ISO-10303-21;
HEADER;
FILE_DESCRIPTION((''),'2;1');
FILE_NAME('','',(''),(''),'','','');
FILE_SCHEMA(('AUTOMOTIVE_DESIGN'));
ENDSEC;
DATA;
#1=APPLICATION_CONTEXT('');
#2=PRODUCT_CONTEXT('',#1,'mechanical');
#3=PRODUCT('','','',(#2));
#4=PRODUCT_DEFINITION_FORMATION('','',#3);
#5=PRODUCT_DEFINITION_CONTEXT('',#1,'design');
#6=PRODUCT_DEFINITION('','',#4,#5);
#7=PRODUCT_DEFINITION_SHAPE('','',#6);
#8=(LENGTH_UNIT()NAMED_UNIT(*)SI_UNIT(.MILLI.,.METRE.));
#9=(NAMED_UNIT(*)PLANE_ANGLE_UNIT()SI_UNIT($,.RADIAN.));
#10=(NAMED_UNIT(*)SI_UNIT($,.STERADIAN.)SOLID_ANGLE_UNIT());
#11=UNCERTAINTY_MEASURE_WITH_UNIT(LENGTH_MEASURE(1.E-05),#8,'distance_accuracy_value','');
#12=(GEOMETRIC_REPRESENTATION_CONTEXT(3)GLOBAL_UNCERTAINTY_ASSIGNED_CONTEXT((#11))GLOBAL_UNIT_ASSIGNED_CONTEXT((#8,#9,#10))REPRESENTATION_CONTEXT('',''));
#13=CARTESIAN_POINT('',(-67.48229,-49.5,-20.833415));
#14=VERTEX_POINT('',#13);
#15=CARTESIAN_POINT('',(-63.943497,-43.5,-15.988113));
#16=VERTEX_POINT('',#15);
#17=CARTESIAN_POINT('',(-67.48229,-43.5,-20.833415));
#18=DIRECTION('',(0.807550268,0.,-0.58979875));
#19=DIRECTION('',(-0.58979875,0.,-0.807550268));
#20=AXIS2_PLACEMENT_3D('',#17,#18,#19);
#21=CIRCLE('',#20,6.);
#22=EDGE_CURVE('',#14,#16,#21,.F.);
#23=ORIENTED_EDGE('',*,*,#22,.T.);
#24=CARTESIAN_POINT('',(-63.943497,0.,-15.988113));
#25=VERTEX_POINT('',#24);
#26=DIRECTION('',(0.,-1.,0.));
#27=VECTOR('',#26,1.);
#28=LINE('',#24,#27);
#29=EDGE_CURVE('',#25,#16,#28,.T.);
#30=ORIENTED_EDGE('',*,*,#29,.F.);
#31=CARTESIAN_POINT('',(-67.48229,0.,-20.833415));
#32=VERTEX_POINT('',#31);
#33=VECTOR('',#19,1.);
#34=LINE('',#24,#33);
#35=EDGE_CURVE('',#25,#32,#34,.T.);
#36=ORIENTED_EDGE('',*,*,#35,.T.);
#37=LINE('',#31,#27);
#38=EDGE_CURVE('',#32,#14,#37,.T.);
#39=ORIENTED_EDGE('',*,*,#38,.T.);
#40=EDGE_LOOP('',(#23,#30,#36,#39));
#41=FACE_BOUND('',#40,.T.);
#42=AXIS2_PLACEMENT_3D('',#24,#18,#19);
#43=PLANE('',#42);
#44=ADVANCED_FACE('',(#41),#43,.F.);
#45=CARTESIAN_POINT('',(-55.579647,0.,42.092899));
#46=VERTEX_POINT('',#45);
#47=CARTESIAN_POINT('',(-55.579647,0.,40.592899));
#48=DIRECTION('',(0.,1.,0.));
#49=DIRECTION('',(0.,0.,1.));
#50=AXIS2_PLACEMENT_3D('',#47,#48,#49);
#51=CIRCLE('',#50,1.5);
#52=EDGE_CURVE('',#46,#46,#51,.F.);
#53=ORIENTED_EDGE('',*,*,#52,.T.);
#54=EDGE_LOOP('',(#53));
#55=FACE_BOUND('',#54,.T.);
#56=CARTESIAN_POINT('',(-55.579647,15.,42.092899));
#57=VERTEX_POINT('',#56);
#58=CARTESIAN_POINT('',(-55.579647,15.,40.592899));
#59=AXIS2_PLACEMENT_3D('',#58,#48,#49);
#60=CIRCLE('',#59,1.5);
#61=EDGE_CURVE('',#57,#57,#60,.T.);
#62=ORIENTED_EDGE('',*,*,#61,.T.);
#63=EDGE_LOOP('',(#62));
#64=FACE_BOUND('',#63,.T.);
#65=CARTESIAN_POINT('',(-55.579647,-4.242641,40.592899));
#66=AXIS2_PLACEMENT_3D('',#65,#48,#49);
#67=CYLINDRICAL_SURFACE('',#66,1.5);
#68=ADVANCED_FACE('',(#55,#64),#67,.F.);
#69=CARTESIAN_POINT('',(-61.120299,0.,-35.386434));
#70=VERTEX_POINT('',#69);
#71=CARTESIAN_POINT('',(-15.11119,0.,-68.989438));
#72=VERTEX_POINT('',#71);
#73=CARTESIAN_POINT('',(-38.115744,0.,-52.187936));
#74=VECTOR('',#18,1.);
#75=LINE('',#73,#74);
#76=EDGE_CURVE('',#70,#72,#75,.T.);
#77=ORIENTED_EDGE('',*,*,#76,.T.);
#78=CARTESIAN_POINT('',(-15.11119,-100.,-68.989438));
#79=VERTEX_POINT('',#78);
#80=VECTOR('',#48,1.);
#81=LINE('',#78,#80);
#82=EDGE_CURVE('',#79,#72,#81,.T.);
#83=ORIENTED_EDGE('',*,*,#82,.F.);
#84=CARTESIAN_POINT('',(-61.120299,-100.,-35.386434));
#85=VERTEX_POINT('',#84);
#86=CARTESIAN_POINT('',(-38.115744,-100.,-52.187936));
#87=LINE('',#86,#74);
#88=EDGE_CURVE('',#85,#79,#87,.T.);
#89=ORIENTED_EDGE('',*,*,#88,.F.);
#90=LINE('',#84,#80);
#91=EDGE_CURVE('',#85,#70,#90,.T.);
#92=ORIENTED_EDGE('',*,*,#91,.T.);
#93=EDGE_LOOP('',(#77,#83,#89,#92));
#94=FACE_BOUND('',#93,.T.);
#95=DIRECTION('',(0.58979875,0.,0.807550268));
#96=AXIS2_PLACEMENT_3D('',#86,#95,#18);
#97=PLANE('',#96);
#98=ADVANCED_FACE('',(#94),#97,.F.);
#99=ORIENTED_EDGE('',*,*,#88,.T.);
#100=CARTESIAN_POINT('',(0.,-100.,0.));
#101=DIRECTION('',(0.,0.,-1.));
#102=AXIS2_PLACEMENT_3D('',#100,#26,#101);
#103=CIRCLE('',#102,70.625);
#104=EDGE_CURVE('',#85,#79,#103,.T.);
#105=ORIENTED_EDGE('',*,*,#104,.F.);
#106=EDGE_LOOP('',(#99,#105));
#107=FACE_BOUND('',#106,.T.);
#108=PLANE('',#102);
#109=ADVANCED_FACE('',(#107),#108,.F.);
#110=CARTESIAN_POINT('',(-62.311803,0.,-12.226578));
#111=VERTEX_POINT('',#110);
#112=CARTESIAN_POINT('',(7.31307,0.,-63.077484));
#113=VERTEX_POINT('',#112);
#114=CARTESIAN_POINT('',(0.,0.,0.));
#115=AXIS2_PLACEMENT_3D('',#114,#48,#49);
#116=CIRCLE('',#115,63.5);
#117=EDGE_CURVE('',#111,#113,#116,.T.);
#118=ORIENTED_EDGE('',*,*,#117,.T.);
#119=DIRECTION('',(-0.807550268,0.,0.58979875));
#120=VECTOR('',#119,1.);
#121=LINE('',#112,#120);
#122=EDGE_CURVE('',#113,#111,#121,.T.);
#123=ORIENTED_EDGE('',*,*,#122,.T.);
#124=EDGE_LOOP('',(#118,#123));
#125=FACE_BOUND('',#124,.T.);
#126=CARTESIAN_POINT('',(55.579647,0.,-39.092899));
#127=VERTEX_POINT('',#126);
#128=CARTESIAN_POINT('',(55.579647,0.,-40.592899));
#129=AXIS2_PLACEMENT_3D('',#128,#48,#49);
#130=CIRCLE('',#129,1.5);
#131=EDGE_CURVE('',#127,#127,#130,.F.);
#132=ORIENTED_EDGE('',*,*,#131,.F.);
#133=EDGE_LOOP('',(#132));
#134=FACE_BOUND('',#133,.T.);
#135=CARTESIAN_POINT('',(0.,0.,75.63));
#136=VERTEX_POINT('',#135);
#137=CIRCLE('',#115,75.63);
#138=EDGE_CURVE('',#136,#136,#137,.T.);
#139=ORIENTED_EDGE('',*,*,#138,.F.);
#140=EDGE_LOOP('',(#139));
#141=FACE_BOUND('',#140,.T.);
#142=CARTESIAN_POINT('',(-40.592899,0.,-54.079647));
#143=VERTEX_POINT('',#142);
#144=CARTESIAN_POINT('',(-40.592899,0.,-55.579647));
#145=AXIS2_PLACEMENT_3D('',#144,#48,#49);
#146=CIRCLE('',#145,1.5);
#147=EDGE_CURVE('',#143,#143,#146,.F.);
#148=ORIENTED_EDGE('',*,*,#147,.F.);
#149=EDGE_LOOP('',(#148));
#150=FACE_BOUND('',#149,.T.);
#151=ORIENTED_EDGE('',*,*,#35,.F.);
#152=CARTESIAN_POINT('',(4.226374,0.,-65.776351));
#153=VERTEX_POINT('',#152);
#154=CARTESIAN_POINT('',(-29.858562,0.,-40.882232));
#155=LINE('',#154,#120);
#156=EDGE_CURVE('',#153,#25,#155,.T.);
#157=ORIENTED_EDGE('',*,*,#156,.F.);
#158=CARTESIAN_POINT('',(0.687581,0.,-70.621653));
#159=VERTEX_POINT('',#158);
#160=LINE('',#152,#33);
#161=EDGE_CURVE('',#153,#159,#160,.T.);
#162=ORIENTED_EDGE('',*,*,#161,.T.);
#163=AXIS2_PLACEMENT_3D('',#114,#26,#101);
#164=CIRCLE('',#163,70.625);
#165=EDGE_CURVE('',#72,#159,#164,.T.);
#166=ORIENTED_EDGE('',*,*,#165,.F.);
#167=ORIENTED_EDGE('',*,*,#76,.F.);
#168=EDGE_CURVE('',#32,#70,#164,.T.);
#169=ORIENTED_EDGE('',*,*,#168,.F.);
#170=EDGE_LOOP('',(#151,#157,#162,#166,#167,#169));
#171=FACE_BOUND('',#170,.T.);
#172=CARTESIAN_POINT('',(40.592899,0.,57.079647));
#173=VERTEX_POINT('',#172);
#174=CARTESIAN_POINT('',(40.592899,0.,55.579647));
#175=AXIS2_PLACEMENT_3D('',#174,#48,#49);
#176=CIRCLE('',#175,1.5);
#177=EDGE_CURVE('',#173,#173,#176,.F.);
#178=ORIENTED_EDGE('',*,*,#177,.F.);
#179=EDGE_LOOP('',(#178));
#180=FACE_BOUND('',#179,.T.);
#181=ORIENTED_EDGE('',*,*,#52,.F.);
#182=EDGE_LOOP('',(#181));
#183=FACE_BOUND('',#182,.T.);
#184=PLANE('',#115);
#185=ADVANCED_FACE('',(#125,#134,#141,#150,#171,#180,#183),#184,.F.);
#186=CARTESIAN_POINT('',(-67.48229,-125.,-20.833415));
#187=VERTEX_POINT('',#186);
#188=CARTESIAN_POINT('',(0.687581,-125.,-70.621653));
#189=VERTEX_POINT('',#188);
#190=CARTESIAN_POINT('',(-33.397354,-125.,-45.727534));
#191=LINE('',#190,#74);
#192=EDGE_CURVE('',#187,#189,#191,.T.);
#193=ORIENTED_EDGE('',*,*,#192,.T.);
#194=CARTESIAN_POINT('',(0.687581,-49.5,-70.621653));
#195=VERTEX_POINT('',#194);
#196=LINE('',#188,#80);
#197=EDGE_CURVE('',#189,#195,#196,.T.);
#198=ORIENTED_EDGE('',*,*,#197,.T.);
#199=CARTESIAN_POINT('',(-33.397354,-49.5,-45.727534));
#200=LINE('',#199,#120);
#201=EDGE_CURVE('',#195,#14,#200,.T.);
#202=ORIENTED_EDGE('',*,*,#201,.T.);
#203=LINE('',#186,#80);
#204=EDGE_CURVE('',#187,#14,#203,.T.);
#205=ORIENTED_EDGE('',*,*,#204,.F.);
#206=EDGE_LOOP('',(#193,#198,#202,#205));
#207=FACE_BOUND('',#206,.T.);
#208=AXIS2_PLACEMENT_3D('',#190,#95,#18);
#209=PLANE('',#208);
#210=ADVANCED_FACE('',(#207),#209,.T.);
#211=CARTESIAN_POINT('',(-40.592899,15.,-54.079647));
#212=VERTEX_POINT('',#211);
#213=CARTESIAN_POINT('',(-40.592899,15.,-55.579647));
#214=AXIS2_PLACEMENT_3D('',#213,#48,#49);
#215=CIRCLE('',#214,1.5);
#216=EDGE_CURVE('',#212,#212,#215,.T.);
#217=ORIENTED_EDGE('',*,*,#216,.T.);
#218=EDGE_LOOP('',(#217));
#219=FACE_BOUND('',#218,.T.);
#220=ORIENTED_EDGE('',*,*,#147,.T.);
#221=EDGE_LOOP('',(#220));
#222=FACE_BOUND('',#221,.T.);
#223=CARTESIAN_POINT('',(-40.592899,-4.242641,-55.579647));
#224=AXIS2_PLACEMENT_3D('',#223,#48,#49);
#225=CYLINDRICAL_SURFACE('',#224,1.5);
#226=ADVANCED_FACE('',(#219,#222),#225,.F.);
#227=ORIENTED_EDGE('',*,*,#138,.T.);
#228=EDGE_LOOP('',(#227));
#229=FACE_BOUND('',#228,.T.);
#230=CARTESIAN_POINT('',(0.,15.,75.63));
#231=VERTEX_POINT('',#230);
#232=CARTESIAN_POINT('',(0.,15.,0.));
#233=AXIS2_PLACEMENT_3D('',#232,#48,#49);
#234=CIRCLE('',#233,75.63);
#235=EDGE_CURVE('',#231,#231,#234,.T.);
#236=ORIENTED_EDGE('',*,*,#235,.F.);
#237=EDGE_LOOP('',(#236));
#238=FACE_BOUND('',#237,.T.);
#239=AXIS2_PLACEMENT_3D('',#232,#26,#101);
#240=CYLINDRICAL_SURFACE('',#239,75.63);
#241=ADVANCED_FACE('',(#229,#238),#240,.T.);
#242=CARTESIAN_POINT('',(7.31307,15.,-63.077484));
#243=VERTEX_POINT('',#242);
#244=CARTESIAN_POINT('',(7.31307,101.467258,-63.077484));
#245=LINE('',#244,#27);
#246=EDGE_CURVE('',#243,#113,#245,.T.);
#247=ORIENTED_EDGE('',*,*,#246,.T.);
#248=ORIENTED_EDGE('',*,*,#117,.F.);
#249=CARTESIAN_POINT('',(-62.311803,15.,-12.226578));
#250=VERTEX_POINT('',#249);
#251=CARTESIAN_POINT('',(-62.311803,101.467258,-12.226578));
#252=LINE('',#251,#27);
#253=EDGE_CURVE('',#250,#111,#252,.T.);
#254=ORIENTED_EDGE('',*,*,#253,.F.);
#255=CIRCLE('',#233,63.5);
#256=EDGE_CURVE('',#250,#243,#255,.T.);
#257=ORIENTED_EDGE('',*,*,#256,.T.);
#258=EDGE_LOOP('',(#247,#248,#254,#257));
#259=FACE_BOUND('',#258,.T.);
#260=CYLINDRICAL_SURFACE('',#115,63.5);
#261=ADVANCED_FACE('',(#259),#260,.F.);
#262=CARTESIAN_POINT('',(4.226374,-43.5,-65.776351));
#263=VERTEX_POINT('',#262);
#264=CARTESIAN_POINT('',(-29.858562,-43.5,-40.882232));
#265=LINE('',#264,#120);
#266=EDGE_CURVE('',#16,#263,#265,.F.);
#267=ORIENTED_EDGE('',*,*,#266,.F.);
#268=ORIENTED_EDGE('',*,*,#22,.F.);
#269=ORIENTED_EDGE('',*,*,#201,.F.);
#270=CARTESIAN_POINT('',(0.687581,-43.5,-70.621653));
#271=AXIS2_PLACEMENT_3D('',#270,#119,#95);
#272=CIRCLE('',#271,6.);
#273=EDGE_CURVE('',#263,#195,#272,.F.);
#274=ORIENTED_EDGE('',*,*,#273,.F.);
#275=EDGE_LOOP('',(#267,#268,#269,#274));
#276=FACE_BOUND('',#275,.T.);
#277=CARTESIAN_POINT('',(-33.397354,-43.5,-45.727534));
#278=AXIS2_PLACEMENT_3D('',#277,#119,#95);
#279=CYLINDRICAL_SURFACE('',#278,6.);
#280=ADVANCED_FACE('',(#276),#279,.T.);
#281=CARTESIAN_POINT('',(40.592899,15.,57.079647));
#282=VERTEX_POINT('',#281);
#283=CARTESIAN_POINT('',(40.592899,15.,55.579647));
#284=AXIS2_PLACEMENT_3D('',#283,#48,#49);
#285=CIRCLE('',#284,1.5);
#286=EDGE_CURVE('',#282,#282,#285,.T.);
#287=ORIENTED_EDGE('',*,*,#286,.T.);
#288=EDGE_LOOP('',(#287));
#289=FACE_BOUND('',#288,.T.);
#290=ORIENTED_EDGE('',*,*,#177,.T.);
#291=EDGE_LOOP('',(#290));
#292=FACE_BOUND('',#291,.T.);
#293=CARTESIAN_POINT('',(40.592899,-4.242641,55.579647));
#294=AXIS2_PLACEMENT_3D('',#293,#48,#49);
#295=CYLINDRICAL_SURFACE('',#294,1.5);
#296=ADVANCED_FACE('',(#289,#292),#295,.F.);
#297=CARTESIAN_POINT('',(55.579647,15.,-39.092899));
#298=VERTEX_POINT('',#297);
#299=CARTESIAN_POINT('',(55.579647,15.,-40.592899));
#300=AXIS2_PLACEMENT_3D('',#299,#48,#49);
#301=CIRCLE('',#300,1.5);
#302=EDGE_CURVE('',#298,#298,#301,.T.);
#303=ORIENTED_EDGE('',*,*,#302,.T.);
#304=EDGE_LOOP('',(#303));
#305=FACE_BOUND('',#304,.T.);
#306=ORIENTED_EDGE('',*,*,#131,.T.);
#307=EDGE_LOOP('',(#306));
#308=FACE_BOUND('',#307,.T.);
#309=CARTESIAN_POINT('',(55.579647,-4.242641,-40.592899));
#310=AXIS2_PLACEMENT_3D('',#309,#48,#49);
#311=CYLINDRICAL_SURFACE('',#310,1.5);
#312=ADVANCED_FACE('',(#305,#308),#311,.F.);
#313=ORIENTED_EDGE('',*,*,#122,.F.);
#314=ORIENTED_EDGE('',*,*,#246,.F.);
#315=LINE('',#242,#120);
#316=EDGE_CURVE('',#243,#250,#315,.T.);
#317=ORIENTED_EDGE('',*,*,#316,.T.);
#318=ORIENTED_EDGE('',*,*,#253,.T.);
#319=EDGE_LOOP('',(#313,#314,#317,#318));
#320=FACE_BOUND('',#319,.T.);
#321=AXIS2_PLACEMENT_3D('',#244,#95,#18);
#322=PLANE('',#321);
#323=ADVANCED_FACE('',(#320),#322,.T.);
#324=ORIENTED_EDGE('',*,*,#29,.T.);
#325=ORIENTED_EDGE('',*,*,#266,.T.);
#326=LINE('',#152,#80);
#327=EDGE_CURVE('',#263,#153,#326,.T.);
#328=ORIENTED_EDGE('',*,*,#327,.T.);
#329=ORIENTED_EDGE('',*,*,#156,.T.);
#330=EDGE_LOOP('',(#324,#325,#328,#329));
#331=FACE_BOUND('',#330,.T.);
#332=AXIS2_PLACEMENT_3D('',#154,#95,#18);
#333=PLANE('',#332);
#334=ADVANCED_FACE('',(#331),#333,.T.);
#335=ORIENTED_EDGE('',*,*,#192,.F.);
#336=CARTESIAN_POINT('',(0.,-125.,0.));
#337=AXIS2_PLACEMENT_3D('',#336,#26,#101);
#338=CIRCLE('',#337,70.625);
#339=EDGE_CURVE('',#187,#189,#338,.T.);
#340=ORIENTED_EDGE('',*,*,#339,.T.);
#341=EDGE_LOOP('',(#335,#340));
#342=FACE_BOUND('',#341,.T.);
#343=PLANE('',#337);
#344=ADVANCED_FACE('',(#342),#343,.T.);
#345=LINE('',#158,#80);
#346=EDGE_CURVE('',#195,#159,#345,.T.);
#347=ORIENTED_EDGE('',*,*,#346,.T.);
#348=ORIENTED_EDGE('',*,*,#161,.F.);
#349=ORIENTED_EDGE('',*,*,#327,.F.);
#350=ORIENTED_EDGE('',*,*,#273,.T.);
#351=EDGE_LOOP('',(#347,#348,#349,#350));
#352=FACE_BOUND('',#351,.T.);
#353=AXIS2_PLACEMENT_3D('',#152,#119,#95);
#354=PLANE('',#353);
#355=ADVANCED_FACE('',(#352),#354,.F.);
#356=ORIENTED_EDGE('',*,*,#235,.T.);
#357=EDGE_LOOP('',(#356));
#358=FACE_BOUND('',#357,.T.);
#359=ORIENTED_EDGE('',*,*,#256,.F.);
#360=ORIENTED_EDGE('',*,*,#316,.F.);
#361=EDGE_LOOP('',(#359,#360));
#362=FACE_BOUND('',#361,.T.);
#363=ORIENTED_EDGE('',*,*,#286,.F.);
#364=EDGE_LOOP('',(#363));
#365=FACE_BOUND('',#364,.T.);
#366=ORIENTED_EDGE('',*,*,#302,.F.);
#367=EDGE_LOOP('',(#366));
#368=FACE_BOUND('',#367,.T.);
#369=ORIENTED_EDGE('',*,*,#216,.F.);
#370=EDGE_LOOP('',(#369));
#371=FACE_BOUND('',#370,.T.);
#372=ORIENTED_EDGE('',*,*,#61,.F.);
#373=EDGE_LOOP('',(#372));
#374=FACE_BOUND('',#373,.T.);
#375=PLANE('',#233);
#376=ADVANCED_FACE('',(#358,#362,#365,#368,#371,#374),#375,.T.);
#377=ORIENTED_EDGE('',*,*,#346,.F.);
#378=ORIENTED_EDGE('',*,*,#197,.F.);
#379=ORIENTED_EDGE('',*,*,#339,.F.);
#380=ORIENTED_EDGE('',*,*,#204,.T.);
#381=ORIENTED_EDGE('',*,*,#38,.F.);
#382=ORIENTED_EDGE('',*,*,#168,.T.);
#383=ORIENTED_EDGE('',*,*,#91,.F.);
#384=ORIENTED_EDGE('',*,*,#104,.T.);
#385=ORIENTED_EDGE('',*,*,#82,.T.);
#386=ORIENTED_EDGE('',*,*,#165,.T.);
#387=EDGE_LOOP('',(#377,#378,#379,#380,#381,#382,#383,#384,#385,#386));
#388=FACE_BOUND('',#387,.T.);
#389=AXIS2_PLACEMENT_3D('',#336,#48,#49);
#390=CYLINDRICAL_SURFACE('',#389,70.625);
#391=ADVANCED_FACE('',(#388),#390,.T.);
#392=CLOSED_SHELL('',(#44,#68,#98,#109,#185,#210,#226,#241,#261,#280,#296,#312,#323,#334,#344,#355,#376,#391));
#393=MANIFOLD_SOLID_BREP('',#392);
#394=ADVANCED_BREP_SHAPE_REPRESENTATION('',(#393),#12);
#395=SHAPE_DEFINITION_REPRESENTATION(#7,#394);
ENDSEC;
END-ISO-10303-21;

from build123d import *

# Parameters (mm, degrees)
SKETCH2_R           = 75.63
BOSS_EXTRUDE1_DEPTH = 15
SKETCH5_R           = 63.5
CUT_EXTRUDE1_DEPTH  = 109.003674937
BOSS_EXTRUDE2_START = -15
BOSS_EXTRUDE2_DEPTH = 15
BOSS_EXTRUDE3_DEPTH = 125
CUT_EXTRUDE4_DEPTH  = 100
SKETCH7_R           = 1.5
CUT_EXTRUDE2_DEPTH  = 15
SKETCH8_W           = 84.415638362
SKETCH8_H           = 49.5
BOSS_EXTRUDE4_DEPTH = 6
FILLET1_R           = 6


with BuildPart() as part:
    # Sketch2 → Boss-Extrude1 (new body)
    with BuildSketch(Plane(origin=(0, 0, 0), x_dir=(1, 0, 0), z_dir=(0, 1, 0))):
        with Locations(Location((0, 0, 0), (0, 0, 270))):
            Circle(SKETCH2_R)
    extrude(amount=BOSS_EXTRUDE1_DEPTH)

    # Sketch5 → Cut-Extrude1 (cut, through all)
    with BuildSketch(Plane(origin=(0, 15, 0), x_dir=(1, 0, 0), z_dir=(0, 1, 0))):
        with Locations(Location((0, 0, 0), (0, 0, 270))):
            Circle(SKETCH5_R)
    extrude(amount=-CUT_EXTRUDE1_DEPTH, mode=Mode.SUBTRACT)

    # Sketch6 → Boss-Extrude2 (add)
    with BuildSketch(Plane.XZ.offset(BOSS_EXTRUDE2_START)):
        with BuildLine():
            Line((7.313069509, -63.077484211), (-62.311802931, -12.226578243))
            ThreePointArc((-62.311802931, -12.226578243), (-37.452220614, -51.279441993), (7.313069509, -63.077484211))
        make_face()
    extrude(amount=BOSS_EXTRUDE2_DEPTH)

    # Sketch6<5> → Boss-Extrude3 (add)
    with BuildSketch(Plane.XZ):
        with BuildLine():
            Line((-8.246344057, -64.096711575), (-10.190161052, -62.677034213))
            ThreePointArc((-10.190161052, -62.677034213), (-37.452220614, -51.279441993), (-56.604547366, -28.778033593))
            Line((-56.604547366, -28.778033593), (-58.548364361, -27.358356231))
            ThreePointArc((-58.548364361, -27.358356231), (-49.90104688, -41.064292825), (-38.115744208, -52.187936044))
            ThreePointArc((-38.115744208, -52.187936044), (-23.933565149, -60.029784976), (-8.246344057, -64.096711575))
        make_face()
        with BuildLine():
            Line((0.687581465, -70.621652889), (-8.246344057, -64.096711575))
            ThreePointArc((-8.246344057, -64.096711575), (-23.933565149, -60.029784976), (-38.115744208, -52.187936044))
            Line((-38.115744208, -52.187936044), (-15.111189696, -68.989438112))
            ThreePointArc((-15.111189696, -68.989438112), (-7.25783369, -70.251081665), (0.687581465, -70.621652889))
        make_face()
        with BuildLine():
            Line((-61.120298719, -35.386433976), (-38.115744208, -52.187936044))
            ThreePointArc((-38.115744208, -52.187936044), (-49.90104688, -41.064292825), (-58.548364361, -27.358356231))
            Line((-58.548364361, -27.358356231), (-67.482289883, -20.833414917))
            ThreePointArc((-67.482289883, -20.833414917), (-64.711699404, -28.289336954), (-61.120298719, -35.386433976))
        make_face()
        with BuildLine():
            Line((-15.111189696, -68.989438112), (-38.115744208, -52.187936044))
            Line((-38.115744208, -52.187936044), (-41.654536706, -57.033237649))
            ThreePointArc((-41.654536706, -57.033237649), (-29.005596113, -64.393835257), (-15.111189696, -68.989438112))
        make_face()
        with BuildLine():
            Line((-41.654536706, -57.033237649), (-38.115744208, -52.187936044))
            Line((-38.115744208, -52.187936044), (-61.120298719, -35.386433976))
            ThreePointArc((-61.120298719, -35.386433976), (-52.514881, -47.223700602), (-41.654536706, -57.033237649))
        make_face()
        with BuildLine():
            ThreePointArc((-56.604547366, -28.778033593), (-37.452220614, -51.279441993), (-10.190161052, -62.677034213))
            Line((-10.190161052, -62.677034213), (-33.397354209, -45.727533903))
            Line((-33.397354209, -45.727533903), (-56.604547366, -28.778033593))
        make_face()
    extrude(amount=BOSS_EXTRUDE3_DEPTH)

    # Sketch6<14> → Cut-Extrude4 (cut)
    with BuildSketch(Plane.XZ):
        with BuildLine():
            Line((-15.111189696, -68.989438112), (-38.115744208, -52.187936044))
            Line((-38.115744208, -52.187936044), (-41.654536706, -57.033237649))
            ThreePointArc((-41.654536706, -57.033237649), (-29.005596113, -64.393835257), (-15.111189696, -68.989438112))
        make_face()
        with BuildLine():
            Line((-41.654536706, -57.033237649), (-38.115744208, -52.187936044))
            Line((-38.115744208, -52.187936044), (-61.120298719, -35.386433976))
            ThreePointArc((-61.120298719, -35.386433976), (-52.514881, -47.223700602), (-41.654536706, -57.033237649))
        make_face()
    extrude(amount=CUT_EXTRUDE4_DEPTH, mode=Mode.SUBTRACT)

    # Sketch7 → Cut-Extrude2 (cut)
    with BuildSketch(Plane(origin=(0, 15, 0), x_dir=(1, 0, 0), z_dir=(0, 1, 0))):
        with Locations(Location((40.592898957, -55.579647168, 0), (0, 0, 270))):
            Circle(SKETCH7_R)
        with Locations(Location((-55.579647168, -40.592898957, 0), (0, 0, 270))):
            Circle(SKETCH7_R)
        with Locations(Location((-40.592898957, 55.579647168, 0), (0, 0, 270))):
            Circle(SKETCH7_R)
        with Locations(Location((55.579647168, 40.592898957, 0), (0, 0, 270))):
            Circle(SKETCH7_R)
    extrude(amount=-CUT_EXTRUDE2_DEPTH, mode=Mode.SUBTRACT)

    # Sketch8 → Boss-Extrude4 (add)
    with BuildSketch(Plane(origin=(-33.397354209, 0, -45.727533903), x_dir=(0.8075502676015422, 0, -0.5897987498263095), z_dir=(0.5897987498263095, 0, 0.8075502676015424))):
        with Locations((0, -24.75)):
            Rectangle(SKETCH8_W, SKETCH8_H)
    extrude(amount=BOSS_EXTRUDE4_DEPTH)

    # Fillet1
    fillet1_edges = [part.edges().sort_by_distance(p)[0] for p in [
        (-29.85856171, -49.5, -40.882232297),
    ]]
    fillet(fillet1_edges, radius=FILLET1_R - 0.0001)  # a hair under: the kernel refuses the full size


solid = part.part
